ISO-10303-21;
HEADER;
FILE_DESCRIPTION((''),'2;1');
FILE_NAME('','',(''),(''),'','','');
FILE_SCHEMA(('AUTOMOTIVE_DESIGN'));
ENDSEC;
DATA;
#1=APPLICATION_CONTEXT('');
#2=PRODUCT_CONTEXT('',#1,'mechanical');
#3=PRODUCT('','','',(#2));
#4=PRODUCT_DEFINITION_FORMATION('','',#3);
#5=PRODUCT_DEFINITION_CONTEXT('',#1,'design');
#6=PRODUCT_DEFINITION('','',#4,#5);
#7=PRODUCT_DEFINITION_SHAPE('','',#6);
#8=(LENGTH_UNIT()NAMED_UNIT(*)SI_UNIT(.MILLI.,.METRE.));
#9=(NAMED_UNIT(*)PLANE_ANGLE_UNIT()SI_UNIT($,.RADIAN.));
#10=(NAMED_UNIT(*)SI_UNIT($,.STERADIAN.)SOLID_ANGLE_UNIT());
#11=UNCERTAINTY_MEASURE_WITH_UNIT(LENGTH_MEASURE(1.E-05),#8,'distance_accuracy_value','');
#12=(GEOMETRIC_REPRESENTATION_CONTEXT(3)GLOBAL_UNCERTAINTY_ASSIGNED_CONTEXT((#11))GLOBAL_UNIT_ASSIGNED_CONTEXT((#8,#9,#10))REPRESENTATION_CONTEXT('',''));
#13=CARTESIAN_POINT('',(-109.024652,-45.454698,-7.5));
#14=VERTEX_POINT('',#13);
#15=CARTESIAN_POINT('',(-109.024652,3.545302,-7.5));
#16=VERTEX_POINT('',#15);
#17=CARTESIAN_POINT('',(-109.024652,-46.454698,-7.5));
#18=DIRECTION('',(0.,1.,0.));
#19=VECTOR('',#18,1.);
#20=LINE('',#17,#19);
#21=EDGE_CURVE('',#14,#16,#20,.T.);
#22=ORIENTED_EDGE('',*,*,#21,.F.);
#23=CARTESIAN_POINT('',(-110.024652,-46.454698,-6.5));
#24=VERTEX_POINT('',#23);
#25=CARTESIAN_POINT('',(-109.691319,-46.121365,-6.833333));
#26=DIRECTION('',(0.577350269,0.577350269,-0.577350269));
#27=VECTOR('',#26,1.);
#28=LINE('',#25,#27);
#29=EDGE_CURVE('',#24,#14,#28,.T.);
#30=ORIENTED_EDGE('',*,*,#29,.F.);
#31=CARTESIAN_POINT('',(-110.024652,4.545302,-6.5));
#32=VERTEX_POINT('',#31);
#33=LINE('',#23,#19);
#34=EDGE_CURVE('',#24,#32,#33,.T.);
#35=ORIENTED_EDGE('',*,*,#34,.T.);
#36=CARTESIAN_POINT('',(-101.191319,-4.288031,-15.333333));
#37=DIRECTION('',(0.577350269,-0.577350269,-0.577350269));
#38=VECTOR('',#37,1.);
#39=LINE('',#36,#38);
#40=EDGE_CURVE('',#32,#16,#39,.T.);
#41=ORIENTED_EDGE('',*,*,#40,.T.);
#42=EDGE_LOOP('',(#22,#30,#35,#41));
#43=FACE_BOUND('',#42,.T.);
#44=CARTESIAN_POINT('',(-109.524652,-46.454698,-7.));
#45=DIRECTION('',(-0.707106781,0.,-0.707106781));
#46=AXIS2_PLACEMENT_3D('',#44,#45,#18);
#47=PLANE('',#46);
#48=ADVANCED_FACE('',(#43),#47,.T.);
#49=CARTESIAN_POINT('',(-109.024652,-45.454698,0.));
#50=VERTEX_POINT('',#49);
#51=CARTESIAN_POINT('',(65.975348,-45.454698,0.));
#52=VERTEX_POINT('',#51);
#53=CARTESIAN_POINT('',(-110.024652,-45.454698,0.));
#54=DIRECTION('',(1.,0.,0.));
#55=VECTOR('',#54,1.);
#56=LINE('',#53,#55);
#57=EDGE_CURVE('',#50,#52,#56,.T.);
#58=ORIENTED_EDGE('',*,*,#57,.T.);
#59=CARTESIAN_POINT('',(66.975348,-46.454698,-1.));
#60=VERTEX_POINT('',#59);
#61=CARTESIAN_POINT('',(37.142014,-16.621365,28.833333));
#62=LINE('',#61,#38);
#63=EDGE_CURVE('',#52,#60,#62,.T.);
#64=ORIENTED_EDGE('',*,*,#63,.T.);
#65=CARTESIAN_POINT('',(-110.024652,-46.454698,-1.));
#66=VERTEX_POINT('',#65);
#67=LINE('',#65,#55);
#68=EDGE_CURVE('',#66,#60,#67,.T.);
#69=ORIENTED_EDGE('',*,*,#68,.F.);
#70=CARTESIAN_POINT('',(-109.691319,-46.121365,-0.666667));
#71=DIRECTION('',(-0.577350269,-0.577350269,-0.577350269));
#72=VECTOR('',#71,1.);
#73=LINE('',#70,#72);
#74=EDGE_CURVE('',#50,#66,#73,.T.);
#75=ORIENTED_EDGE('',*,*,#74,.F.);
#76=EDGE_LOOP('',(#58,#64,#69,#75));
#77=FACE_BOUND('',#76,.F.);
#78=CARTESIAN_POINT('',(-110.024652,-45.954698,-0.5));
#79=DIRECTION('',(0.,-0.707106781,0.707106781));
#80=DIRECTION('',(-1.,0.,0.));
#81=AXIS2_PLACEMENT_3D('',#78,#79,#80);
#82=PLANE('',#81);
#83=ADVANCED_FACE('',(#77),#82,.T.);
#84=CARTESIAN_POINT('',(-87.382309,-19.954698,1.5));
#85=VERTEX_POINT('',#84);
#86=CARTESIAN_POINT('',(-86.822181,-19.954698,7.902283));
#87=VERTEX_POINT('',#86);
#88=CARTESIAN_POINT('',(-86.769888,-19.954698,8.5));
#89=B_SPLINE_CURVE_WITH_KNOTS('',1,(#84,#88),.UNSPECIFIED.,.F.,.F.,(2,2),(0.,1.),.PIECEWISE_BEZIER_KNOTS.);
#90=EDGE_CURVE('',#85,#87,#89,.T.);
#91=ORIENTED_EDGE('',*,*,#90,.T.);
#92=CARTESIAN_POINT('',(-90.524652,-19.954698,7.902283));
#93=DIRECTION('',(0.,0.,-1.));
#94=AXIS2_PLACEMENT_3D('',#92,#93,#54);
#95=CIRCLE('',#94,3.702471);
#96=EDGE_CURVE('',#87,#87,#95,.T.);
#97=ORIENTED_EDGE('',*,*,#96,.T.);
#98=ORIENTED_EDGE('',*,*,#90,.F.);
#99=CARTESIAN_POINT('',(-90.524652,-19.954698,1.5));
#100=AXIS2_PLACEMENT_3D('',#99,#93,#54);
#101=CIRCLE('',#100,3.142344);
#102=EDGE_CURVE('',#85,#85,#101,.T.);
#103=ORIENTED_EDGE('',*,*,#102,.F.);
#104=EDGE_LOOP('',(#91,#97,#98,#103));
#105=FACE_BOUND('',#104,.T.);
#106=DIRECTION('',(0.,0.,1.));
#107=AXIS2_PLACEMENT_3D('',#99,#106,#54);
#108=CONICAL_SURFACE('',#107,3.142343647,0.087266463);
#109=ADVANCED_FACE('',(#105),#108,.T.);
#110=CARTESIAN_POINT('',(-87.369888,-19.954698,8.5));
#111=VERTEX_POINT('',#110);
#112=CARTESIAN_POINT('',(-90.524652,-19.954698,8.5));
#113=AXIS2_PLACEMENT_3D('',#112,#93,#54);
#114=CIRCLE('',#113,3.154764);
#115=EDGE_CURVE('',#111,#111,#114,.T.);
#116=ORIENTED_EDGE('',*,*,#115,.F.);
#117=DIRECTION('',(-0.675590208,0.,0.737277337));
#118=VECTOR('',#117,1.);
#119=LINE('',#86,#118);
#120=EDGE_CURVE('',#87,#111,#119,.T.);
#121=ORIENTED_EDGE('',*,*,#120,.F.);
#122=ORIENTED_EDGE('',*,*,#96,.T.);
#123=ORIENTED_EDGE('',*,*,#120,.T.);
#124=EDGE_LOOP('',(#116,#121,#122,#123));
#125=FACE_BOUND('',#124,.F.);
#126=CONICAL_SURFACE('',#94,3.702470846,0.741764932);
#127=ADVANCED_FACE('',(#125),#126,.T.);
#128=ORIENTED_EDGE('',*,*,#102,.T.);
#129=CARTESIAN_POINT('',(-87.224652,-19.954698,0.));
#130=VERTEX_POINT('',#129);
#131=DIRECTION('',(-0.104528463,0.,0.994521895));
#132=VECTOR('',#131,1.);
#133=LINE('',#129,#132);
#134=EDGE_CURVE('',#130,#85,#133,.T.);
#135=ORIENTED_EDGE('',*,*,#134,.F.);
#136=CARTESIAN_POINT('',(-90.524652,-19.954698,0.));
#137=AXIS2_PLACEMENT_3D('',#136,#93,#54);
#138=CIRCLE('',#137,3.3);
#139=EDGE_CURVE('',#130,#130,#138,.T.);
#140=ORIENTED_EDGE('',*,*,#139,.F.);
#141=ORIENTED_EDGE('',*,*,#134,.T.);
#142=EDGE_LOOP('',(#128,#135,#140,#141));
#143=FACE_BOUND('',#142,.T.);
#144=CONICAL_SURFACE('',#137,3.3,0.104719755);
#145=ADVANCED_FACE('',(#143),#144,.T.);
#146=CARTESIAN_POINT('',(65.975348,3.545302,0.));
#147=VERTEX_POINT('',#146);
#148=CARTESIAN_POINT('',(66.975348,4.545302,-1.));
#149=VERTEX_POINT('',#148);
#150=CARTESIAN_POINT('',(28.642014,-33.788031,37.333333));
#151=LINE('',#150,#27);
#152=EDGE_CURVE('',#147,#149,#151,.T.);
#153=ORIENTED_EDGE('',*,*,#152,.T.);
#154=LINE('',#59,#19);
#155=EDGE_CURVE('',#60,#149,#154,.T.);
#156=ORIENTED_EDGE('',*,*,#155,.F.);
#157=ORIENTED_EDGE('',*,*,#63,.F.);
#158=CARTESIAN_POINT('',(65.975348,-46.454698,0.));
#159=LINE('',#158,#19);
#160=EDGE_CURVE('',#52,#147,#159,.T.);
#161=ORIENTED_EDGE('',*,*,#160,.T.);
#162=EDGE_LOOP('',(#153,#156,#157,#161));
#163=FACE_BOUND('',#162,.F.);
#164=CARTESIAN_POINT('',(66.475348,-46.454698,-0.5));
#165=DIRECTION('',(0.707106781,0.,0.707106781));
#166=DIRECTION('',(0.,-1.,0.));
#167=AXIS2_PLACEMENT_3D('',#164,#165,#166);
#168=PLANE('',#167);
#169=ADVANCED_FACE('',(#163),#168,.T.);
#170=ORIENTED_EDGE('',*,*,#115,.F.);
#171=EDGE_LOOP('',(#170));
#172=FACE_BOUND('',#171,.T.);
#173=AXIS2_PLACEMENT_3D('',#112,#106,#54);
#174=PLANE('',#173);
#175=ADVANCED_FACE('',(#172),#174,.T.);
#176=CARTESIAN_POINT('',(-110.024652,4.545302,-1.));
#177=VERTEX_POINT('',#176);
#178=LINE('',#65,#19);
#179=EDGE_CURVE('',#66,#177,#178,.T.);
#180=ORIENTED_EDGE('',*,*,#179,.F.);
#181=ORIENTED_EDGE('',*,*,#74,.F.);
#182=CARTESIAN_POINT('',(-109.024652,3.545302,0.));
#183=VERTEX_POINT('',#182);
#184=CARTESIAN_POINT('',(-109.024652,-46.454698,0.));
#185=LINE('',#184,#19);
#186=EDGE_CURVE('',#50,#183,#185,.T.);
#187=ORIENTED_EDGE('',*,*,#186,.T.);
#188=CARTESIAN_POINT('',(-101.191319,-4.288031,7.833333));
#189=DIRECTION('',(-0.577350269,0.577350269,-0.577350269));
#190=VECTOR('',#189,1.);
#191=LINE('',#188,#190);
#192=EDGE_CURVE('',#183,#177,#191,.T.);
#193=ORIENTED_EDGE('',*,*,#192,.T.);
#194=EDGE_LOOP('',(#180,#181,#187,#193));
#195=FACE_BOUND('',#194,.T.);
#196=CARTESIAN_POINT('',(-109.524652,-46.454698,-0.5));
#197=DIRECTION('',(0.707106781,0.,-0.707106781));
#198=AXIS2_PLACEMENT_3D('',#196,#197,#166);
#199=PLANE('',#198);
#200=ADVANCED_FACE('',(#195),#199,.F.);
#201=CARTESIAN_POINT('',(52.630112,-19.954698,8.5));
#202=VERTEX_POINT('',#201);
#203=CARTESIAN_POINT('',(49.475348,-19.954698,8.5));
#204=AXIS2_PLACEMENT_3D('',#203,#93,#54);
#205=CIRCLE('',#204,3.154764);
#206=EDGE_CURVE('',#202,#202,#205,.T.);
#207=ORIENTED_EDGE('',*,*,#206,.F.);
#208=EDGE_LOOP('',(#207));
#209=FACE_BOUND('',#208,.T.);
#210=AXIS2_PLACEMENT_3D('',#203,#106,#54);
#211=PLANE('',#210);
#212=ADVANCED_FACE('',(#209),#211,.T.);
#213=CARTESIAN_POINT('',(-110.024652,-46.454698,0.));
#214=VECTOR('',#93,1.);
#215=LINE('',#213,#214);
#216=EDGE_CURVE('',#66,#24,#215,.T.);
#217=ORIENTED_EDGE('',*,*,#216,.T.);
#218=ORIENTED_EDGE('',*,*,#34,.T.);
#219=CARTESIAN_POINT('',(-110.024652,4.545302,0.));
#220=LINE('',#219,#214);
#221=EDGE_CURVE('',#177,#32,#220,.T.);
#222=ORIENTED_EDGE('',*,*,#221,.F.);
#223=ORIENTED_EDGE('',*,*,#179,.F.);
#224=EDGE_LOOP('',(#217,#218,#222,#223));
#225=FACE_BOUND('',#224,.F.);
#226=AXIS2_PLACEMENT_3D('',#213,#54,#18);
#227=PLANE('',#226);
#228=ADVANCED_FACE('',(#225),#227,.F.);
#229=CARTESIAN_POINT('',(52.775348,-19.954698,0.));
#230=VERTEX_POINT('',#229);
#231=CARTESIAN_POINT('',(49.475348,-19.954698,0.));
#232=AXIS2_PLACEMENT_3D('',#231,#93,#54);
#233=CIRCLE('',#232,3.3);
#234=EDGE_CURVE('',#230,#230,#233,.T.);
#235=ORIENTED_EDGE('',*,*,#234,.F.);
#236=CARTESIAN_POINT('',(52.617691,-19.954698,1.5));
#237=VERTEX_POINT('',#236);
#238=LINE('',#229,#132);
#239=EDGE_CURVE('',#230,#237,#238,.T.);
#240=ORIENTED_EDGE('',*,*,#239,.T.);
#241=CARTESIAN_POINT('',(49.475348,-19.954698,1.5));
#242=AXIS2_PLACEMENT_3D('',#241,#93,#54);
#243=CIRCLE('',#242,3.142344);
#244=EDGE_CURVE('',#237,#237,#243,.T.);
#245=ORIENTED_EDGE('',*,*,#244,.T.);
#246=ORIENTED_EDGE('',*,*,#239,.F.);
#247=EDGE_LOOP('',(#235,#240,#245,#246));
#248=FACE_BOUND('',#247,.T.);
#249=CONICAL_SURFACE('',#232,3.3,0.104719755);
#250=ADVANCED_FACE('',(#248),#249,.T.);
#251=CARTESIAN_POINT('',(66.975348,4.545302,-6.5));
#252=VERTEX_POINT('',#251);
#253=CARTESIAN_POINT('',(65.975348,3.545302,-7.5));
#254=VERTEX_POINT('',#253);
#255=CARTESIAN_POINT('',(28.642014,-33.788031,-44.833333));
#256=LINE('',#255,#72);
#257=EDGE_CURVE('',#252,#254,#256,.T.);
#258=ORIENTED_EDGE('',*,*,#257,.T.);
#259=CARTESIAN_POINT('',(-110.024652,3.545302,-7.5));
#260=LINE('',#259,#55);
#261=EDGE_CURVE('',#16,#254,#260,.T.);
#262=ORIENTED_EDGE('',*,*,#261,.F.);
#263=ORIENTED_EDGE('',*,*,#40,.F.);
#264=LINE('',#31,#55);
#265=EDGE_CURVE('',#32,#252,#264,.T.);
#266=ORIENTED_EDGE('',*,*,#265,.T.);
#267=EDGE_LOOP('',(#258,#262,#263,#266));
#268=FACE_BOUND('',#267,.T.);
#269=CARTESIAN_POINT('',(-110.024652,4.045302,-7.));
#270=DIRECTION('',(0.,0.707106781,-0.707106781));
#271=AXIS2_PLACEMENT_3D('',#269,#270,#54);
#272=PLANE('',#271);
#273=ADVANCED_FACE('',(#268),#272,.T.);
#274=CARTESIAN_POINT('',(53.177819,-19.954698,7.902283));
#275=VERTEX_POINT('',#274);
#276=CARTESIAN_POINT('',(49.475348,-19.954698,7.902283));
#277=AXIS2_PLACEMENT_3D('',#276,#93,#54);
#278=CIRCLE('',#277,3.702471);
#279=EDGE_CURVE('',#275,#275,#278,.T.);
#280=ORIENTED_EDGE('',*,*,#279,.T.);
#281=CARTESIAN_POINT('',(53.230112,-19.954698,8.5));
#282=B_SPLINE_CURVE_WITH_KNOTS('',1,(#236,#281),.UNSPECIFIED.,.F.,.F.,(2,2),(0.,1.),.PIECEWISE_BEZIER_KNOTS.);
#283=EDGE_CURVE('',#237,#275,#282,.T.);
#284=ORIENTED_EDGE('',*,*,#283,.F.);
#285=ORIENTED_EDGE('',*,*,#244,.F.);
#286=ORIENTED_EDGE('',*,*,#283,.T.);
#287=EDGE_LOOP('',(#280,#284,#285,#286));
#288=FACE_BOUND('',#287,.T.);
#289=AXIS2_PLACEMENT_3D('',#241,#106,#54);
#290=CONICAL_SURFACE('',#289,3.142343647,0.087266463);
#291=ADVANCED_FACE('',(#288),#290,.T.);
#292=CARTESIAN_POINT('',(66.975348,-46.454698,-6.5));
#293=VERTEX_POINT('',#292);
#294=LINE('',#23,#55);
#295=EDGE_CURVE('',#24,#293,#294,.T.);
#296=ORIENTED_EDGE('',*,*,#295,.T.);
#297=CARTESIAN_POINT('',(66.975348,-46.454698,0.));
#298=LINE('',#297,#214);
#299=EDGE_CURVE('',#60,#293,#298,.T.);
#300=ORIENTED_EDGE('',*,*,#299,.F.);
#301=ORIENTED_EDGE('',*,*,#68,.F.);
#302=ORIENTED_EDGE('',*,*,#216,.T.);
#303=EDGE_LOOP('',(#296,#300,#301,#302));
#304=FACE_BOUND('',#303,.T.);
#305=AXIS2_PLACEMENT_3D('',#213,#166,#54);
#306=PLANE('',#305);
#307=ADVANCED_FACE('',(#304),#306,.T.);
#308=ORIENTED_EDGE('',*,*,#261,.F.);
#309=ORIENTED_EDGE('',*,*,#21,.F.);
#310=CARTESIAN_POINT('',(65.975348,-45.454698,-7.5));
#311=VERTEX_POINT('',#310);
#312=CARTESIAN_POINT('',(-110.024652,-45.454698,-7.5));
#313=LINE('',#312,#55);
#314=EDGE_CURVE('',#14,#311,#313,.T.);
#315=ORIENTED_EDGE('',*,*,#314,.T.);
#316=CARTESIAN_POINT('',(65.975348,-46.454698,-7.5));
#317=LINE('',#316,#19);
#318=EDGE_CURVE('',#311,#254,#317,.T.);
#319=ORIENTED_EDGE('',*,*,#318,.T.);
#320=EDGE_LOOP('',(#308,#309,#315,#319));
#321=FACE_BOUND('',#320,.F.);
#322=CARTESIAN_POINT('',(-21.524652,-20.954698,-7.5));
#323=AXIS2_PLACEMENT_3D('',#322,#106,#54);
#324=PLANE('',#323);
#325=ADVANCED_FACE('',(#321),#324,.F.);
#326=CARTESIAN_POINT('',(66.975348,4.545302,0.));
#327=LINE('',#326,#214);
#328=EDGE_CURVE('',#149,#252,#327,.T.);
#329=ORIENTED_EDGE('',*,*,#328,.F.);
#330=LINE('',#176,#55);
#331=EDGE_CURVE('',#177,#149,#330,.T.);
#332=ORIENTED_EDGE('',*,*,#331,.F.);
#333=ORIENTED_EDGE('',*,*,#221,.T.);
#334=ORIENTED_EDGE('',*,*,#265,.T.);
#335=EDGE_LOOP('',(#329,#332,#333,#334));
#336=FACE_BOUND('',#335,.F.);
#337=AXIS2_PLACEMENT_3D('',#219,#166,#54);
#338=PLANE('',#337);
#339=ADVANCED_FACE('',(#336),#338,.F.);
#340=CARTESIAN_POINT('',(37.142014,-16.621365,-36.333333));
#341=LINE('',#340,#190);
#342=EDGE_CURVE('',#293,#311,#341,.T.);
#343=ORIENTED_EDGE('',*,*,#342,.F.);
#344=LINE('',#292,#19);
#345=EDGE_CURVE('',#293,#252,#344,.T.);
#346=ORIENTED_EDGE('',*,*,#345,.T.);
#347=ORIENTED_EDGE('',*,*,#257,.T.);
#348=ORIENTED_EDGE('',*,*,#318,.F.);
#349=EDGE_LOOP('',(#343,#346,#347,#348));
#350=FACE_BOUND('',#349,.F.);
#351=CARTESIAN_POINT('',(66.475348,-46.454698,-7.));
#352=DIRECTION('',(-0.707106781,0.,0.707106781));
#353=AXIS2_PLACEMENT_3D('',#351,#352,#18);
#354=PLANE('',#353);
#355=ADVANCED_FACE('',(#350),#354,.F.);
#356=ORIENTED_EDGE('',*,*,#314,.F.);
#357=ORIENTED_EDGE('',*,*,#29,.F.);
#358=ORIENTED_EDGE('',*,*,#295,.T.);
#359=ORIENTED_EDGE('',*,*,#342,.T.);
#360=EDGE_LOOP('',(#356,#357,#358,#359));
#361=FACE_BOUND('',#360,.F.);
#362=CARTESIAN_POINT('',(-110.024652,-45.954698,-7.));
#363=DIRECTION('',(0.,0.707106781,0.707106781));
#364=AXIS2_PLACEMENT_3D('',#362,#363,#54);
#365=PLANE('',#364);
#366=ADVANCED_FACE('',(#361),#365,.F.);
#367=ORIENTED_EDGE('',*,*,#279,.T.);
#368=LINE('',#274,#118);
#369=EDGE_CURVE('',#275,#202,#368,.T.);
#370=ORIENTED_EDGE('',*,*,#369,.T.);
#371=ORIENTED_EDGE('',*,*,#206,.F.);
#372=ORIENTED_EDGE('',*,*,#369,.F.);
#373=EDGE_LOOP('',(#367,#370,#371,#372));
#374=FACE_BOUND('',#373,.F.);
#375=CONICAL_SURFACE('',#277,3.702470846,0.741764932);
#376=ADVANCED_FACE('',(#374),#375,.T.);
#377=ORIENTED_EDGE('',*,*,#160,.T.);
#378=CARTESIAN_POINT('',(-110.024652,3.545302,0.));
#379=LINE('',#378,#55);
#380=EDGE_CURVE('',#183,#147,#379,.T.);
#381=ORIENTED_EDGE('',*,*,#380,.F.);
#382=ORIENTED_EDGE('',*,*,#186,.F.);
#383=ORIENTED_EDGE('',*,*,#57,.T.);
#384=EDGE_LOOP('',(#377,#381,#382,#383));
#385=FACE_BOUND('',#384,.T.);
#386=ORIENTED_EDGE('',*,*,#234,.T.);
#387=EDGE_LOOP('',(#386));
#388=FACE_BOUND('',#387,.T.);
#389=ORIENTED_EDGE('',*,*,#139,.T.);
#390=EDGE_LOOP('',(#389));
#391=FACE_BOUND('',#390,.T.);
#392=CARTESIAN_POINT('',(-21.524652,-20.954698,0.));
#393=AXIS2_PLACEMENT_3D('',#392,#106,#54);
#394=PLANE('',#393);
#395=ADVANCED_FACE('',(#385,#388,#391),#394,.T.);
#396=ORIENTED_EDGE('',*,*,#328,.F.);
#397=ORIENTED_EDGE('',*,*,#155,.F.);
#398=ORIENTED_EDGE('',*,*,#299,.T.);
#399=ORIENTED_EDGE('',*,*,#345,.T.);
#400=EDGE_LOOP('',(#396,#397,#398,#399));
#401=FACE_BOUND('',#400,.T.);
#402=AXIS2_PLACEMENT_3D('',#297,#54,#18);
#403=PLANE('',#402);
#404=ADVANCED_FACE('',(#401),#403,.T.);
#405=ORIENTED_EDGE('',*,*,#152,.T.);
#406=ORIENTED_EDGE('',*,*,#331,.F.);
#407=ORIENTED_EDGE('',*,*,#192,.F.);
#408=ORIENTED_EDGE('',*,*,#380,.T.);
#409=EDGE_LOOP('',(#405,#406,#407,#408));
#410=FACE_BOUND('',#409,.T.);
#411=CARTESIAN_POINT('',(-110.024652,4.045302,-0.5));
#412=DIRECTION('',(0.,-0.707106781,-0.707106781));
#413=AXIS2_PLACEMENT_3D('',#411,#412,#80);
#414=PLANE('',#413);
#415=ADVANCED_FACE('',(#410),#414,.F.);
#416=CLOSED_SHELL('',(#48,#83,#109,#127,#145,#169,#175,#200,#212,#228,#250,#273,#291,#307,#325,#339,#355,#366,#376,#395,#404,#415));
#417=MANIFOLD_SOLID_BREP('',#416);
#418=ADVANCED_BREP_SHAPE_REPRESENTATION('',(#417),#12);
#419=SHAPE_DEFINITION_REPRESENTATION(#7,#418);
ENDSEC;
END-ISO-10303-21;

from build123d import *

# Parameters (mm, degrees)
F0_W      = 177
F0_H      = 51
F0_R      = 3.3
F1_DEPTH  = 7.5
F2_DEPTH  = 1.5
F2_TAPER  = 6
F2_FACE_R = 3.1423436471
F3_DEPTH  = 7
F3_TAPER  = -5
F5_SIZE   = 1


# Not quite as in the source:
# - a fillet or chamfer that OpenCascade refuses, or shapes differently, is made with other operations: its cross-section is extruded or revolved along the edge and cut away or added


with BuildPart() as f1:
    # F0 (on Top) → F1 (new body)
    with BuildSketch(Plane.XY):
        with Locations((-21.5246523023, -20.9546978474)):
            Rectangle(F0_W, F0_H)
        with Locations((-90.5246523023, -19.9546978474)):
            Circle(F0_R, mode=Mode.SUBTRACT)
        with Locations((49.4753476977, -19.9546978474)):
            Circle(F0_R, mode=Mode.SUBTRACT)
        with Locations((-90.5246523023, -19.9546978474)):
            Circle(F0_R)
        with Locations((49.4753476977, -19.9546978474)):
            Circle(F0_R)
    extrude(amount=-F1_DEPTH)

    # F0 (on Top) → F2 (join)
    with BuildSketch(Plane.XY):
        with Locations((-90.5246523023, -19.9546978474)):
            Circle(F0_R)
        with Locations((49.4753476977, -19.9546978474)):
            Circle(F0_R)
    extrude(amount=F2_DEPTH, taper=F2_TAPER)

    # F2_face (on face) → F3 (join)
    with BuildSketch(Plane(origin=(49.4753476977, -19.9546978474, 1.5), x_dir=(1, 0, 0), z_dir=(0, 0, 1))):
        Circle(F2_FACE_R)
        with Locations((-140, 0)):
            Circle(F2_FACE_R)
    extrude(amount=F3_DEPTH, taper=F3_TAPER)

    # F4: chamfer of 0.6 on 2 edges, made by hand

    # F4_s1 → F4_t2 (revolve, cut)
    with BuildSketch(Plane.XZ.offset(19.9546978474)):
        Polygon((-86.8221814561, 7.9022831811), (-87.3698880105, 8.5), (-86.7698880105, 8.5), align=None)
    revolve(axis=Axis((-90.5246523023, -19.9546978474, 8.5), (0, 0, -1)), mode=Mode.SUBTRACT)

    # F4_s3 → F4_t4 (revolve, cut)
    with BuildSketch(Plane.XZ.offset(19.9546978474)):
        Polygon((53.1778185439, 7.9022831811), (52.6301119895, 8.5), (53.2301119895, 8.5), align=None)
    revolve(axis=Axis((49.4753476977, -19.9546978474, 8.5), (0, 0, -1)), mode=Mode.SUBTRACT)

    # F5
    f5_edges = [f1.edges().sort_by_distance(p)[0] for p in [
        (-110.024652, -20.954698, 0),
        (-21.524652, 4.545302, 0),
        (-21.524652, -46.454698, 0),
        (66.975348, -20.954698, 0),
        (-21.524652, 4.545302, -7.5),
        (-110.024652, -20.954698, -7.5),
        (-21.524652, -46.454698, -7.5),
        (66.975348, -20.954698, -7.5),
    ]]
    chamfer(f5_edges, length=F5_SIZE)


solid = f1.part
